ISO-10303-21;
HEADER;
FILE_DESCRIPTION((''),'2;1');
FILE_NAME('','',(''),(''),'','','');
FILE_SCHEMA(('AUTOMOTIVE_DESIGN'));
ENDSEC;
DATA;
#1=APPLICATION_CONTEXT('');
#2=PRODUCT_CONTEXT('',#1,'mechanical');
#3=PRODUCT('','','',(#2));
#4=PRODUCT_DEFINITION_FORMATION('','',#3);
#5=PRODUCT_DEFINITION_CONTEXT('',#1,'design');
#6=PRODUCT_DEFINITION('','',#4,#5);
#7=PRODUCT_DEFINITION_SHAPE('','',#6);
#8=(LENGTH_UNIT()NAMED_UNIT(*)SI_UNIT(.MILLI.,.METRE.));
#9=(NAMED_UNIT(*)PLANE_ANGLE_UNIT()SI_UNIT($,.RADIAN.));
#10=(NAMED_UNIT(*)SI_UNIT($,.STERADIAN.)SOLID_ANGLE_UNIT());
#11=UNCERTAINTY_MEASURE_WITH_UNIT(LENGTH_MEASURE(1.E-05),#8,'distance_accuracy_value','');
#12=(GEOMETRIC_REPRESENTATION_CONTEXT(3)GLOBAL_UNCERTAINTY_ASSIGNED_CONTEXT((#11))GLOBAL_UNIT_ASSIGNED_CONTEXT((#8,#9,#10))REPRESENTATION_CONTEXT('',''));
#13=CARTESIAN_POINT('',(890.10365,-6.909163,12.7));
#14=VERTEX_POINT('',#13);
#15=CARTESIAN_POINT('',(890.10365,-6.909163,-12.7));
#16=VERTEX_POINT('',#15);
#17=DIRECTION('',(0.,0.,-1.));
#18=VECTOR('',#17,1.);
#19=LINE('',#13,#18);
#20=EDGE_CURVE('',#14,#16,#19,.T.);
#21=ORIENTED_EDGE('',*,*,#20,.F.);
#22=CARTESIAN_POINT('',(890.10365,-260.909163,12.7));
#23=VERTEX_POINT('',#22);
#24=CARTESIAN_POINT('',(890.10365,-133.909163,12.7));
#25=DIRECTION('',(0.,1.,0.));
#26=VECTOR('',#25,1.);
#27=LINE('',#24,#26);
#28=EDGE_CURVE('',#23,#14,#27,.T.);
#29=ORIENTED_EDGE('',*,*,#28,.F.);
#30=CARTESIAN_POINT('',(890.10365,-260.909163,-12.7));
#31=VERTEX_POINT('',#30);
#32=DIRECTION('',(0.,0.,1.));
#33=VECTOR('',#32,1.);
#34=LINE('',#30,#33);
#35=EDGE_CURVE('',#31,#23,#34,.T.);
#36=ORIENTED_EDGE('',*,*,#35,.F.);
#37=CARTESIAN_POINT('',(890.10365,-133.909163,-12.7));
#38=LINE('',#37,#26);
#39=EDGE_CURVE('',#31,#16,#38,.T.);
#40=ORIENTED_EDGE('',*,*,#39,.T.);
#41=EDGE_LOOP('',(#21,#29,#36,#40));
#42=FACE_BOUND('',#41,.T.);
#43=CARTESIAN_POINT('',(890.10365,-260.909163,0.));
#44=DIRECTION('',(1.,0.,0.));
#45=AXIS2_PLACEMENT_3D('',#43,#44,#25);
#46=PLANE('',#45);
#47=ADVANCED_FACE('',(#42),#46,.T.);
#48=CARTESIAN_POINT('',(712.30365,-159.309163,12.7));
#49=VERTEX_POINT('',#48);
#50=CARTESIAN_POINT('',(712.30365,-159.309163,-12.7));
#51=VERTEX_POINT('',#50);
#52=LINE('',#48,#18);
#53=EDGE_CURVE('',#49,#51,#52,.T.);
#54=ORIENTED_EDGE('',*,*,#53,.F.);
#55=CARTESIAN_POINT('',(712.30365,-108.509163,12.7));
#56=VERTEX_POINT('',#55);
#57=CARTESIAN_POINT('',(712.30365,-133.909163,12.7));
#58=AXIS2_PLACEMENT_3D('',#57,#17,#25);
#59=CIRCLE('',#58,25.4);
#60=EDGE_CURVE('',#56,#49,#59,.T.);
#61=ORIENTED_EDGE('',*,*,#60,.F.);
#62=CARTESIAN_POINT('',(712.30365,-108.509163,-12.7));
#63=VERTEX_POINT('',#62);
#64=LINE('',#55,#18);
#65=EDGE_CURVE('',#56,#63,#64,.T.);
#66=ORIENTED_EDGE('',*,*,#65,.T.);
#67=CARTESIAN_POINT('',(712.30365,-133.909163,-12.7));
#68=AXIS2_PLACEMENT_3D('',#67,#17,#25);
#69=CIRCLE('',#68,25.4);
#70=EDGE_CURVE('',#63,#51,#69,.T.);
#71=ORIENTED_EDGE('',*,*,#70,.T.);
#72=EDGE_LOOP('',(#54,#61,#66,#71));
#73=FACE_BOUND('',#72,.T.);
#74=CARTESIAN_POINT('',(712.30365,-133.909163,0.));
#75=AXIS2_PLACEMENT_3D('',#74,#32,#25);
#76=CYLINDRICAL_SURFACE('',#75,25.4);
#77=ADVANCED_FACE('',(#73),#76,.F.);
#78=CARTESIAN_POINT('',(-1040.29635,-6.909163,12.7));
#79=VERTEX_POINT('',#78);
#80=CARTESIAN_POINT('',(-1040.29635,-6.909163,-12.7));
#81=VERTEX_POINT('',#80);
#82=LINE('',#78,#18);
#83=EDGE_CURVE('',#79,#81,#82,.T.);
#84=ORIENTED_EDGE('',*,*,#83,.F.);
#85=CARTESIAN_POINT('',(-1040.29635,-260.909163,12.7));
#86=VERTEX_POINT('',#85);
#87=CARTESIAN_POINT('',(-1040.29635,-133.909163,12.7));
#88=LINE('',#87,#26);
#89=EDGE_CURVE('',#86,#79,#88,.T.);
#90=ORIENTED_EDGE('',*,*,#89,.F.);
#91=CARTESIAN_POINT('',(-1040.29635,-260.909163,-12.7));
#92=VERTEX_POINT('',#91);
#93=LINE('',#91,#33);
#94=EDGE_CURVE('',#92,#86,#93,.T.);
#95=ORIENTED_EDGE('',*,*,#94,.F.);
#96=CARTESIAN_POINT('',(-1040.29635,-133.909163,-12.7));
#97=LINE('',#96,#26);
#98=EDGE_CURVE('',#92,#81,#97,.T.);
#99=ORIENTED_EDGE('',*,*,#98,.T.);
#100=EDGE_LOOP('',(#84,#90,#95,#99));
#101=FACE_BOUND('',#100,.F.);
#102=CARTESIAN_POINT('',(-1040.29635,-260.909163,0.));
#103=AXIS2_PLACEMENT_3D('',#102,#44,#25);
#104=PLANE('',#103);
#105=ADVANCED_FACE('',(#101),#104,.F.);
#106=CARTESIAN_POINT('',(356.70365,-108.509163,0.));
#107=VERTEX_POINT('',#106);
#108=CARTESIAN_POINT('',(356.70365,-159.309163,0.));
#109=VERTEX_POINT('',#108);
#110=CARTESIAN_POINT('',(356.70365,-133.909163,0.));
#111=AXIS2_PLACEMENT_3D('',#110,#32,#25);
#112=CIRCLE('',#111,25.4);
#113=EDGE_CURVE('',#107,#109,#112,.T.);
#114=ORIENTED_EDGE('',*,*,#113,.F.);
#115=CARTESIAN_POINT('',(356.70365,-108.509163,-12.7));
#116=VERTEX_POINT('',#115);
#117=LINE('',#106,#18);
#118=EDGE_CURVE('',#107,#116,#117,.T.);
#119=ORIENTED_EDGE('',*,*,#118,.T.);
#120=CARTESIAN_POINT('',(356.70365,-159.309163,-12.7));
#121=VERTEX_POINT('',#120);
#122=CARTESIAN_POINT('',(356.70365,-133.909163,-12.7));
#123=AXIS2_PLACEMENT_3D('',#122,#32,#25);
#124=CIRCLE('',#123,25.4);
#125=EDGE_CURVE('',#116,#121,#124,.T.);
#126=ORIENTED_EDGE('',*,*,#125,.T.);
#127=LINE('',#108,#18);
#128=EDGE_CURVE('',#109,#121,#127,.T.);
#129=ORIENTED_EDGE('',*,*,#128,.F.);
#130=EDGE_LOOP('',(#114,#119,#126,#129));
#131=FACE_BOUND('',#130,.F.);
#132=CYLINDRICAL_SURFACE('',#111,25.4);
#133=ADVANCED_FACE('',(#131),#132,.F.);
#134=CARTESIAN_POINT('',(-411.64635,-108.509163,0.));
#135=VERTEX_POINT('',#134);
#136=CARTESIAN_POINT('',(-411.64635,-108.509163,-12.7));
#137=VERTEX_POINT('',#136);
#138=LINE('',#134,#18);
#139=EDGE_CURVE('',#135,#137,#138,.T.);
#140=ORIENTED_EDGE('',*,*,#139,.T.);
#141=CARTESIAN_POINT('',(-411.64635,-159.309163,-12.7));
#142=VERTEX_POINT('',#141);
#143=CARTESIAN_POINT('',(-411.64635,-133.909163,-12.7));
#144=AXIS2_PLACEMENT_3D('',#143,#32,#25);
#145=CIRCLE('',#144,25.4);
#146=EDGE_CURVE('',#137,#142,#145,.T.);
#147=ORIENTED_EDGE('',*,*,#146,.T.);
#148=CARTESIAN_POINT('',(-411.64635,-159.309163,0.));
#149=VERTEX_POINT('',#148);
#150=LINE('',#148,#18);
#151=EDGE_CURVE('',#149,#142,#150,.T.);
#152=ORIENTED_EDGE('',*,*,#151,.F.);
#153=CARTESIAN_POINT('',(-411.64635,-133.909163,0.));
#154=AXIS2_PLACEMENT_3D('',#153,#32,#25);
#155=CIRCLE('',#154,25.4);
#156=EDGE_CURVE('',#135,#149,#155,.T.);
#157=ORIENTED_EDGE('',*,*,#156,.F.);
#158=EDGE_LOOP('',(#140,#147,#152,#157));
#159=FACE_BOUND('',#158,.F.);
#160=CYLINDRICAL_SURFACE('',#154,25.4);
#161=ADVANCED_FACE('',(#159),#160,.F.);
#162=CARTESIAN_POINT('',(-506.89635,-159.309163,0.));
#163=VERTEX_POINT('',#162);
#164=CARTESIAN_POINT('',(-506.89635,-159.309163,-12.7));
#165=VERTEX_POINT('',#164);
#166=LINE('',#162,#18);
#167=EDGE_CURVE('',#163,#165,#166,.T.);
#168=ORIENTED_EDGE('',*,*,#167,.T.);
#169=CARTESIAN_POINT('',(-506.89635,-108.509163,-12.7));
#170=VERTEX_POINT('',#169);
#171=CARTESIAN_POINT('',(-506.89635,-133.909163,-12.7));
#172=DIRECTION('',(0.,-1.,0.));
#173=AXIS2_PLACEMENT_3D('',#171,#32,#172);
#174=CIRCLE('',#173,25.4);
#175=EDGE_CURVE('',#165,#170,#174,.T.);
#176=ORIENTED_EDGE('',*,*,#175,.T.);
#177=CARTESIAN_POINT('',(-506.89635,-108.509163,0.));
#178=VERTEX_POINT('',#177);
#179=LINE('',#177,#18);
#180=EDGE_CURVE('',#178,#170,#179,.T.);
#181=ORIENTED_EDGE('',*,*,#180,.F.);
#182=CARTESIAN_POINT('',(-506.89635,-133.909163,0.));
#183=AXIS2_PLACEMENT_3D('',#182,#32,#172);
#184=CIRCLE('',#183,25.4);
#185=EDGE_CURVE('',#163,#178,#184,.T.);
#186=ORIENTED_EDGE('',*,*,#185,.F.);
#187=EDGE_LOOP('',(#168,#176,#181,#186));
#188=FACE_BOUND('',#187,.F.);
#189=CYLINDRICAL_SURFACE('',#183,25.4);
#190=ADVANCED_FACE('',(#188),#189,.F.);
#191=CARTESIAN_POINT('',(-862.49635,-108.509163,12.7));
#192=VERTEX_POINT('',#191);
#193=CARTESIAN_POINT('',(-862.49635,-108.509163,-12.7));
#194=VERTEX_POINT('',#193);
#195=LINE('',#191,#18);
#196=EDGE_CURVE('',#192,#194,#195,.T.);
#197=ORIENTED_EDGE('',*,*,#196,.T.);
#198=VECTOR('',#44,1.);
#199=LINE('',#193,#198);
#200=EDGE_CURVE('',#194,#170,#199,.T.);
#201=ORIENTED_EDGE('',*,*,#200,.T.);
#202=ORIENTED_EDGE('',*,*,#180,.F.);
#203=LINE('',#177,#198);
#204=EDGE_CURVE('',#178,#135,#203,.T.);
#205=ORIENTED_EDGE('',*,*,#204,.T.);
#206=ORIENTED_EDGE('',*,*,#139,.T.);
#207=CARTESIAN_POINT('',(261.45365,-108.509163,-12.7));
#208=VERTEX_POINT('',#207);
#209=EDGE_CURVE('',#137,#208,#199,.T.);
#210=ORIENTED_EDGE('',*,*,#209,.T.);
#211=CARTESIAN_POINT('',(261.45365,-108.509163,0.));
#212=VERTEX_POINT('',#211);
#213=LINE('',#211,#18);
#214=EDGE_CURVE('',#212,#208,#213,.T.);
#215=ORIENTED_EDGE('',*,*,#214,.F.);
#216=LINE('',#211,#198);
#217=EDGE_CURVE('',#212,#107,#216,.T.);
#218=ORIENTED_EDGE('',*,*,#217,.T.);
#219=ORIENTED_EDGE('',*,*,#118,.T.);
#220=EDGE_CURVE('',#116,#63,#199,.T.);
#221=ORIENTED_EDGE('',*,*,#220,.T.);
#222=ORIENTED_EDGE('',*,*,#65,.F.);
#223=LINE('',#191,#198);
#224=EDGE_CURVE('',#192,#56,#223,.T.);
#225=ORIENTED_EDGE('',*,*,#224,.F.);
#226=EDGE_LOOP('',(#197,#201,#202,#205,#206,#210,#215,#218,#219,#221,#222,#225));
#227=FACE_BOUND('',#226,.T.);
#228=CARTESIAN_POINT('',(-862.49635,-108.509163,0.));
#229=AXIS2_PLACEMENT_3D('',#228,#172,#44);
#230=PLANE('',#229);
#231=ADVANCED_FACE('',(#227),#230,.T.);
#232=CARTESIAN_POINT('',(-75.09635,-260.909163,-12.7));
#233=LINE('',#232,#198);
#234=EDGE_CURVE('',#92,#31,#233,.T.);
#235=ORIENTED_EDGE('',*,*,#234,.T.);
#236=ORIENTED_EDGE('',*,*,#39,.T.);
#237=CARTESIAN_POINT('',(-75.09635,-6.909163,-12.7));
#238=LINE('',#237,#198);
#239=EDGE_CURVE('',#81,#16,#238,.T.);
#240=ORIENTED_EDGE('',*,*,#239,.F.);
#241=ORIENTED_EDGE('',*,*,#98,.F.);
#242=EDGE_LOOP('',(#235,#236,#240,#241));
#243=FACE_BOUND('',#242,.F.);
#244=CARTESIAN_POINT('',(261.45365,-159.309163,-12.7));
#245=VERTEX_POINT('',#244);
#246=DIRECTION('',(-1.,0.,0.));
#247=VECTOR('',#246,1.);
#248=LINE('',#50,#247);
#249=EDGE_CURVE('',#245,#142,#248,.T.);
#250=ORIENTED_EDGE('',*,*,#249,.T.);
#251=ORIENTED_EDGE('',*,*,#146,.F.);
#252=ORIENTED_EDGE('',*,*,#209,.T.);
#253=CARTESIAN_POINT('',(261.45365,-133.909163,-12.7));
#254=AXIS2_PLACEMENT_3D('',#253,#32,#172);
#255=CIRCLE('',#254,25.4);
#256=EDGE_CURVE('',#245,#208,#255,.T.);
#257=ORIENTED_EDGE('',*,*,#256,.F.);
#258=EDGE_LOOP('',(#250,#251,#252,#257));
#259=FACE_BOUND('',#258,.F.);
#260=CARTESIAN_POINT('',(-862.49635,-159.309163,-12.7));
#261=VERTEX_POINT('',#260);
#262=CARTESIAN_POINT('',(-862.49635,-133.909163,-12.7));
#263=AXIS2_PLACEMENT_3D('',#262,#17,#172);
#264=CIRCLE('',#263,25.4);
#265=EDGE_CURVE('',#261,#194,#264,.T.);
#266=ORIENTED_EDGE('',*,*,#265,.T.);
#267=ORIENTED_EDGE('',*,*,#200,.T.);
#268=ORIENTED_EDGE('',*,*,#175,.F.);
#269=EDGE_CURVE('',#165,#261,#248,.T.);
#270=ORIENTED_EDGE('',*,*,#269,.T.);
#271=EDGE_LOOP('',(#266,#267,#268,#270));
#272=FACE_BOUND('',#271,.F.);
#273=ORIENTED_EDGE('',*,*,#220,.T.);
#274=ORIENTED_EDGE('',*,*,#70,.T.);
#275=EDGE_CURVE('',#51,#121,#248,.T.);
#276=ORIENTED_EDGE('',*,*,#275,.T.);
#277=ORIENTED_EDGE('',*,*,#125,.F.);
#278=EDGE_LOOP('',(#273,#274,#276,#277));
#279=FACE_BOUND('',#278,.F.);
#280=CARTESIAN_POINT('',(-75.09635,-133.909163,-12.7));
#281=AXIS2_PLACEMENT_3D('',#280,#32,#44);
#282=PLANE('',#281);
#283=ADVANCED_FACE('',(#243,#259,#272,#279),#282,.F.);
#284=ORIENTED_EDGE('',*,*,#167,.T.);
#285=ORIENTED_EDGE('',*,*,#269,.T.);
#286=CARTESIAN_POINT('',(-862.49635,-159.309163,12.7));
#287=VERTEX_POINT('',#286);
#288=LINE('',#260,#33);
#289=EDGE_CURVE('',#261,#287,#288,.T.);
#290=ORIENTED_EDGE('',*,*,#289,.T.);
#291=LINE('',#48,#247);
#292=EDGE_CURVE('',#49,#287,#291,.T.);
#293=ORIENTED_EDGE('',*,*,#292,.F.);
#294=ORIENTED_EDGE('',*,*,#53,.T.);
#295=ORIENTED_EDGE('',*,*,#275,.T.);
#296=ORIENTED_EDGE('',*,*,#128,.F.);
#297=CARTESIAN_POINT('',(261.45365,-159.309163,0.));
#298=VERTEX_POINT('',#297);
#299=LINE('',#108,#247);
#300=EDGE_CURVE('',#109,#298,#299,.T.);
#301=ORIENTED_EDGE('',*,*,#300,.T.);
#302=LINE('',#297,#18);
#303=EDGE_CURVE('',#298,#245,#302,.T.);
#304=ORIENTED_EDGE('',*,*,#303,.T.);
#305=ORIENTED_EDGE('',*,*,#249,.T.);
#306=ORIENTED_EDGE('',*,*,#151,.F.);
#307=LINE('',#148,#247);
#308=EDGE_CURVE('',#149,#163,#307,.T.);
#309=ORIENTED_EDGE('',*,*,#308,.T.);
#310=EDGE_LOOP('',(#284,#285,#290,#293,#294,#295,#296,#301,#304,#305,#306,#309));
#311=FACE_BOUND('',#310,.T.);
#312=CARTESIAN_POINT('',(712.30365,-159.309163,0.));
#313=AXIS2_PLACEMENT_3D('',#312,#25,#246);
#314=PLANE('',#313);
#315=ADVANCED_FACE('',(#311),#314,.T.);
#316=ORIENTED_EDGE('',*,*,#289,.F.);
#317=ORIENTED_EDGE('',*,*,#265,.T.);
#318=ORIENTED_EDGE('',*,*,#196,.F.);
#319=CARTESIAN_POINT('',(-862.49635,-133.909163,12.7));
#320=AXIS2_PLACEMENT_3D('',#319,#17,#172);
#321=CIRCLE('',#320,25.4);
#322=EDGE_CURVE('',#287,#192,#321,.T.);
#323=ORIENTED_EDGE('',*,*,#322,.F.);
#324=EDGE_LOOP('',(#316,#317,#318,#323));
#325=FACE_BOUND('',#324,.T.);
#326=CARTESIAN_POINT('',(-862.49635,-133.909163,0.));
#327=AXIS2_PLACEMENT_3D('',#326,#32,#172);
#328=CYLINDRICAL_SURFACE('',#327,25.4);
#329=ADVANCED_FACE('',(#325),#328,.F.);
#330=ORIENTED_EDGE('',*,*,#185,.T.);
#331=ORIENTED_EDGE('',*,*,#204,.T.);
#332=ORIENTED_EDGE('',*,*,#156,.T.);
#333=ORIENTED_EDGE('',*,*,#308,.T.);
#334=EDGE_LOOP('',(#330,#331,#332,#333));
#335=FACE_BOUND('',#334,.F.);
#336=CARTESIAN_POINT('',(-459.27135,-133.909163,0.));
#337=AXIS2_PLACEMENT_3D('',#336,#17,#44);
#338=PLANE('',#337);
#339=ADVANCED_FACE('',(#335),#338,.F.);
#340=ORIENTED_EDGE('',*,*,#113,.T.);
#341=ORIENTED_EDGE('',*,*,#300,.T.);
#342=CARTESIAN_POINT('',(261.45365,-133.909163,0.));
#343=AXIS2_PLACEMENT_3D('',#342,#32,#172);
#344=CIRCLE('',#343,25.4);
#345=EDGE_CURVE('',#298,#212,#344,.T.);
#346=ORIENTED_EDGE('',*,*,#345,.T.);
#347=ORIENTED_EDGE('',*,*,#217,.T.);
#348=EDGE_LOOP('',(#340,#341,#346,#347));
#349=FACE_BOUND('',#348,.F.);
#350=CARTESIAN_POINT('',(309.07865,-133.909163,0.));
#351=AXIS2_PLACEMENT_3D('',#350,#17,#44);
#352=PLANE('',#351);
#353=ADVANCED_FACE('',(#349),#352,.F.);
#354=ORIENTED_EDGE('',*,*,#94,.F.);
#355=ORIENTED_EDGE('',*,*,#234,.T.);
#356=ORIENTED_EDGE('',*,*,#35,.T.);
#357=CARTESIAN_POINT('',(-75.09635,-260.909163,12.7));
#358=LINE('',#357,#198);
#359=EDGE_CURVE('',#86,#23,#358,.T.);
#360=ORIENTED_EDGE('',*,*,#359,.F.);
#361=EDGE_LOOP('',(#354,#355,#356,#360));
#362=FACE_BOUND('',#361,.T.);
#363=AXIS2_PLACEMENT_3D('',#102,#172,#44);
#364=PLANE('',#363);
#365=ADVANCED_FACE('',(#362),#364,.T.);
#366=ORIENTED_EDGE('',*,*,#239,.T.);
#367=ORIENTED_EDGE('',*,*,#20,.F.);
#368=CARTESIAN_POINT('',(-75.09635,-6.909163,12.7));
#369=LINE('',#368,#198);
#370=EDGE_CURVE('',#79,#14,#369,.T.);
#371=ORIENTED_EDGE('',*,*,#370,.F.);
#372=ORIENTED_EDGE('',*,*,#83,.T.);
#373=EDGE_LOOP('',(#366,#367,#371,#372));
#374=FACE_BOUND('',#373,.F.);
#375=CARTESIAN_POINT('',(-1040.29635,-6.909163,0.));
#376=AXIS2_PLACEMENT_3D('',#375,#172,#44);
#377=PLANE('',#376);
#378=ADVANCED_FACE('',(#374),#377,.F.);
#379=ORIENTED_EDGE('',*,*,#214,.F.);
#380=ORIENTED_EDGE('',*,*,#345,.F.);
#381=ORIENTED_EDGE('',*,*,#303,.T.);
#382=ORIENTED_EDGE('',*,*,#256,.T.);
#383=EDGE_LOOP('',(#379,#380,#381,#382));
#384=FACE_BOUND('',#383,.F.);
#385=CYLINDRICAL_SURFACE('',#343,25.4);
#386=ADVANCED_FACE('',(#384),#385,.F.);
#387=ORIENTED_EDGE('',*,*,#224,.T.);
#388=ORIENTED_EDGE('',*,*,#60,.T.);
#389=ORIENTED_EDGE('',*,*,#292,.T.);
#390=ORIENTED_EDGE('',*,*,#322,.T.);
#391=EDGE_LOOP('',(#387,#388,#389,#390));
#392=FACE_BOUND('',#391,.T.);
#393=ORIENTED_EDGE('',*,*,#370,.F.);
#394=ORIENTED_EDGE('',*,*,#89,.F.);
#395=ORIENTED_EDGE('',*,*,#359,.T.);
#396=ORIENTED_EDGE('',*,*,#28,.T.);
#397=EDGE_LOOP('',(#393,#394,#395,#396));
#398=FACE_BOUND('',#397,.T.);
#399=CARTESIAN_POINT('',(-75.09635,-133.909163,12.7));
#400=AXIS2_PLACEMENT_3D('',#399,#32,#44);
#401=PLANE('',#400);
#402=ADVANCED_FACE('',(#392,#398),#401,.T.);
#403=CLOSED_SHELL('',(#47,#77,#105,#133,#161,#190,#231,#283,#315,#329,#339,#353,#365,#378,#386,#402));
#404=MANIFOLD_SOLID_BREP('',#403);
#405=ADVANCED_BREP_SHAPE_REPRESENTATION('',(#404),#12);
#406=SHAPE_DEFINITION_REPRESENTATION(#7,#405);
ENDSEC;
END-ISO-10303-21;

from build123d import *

# Parameters (mm, degrees)
F0_W     = 1930.4
F0_H     = 254
F1_DEPTH = 12.7
F3_DEPTH = 12.7


# Not quite as in the source:
# - ends of sketch curves that miss each other by under 0.0002 mm in the source are joined
# - a feature names something its author has since deleted; it is built from what else it names


with BuildPart() as f1:
    # F0 (on Top) → F1 (new body)
    with BuildSketch(Plane.XY):
        with Locations((-75.096349721, -133.9091630952)):
            Rectangle(F0_W, F0_H)
        with BuildLine():
            ThreePointArc((-862.496349721, -159.3091630952), (-887.896349721, -133.9091630952), (-862.496349721, -108.5091630952))
            Line((-862.496349721, -108.5091630952), (712.303650279, -108.5091630952))
            ThreePointArc((712.303650279, -108.5091630952), (737.703650279, -133.9091630952), (712.303650279, -159.3091630952))
            Line((712.303650279, -159.3091630952), (-862.496349721, -159.3091630952))
        make_face(mode=Mode.SUBTRACT)
    extrude(amount=F1_DEPTH)

    # F2 (on face) + F0 (on Top) → F3 (join)
    with BuildSketch(Plane(origin=(0, 0, 0), x_dir=(1, 0, 0), z_dir=(0, 0, -1))):
        with BuildLine():
            ThreePointArc((-506.896349721, 159.3091630952), (-481.496349721, 133.9091630952), (-506.896349721, 108.5091630952))
            Line((-506.896349721, 108.5091630952), (-411.646349721, 108.5091630952))
            ThreePointArc((-411.646349721, 108.5091630952), (-437.046349721, 133.9091630952), (-411.646349721, 159.3091630952))
            Line((-411.646349721, 159.3091630952), (-506.896349721, 159.3091630952))
        make_face()
        with BuildLine():
            ThreePointArc((261.453650279, 159.3091630952), (286.853650279, 133.9091630952), (261.453650279, 108.5091630952))
            Line((261.453650279, 108.5091630952), (356.703650279, 108.5091630952))
            ThreePointArc((356.703650279, 108.5091630952), (331.303650279, 133.9091630952), (356.703650279, 159.3091630952))
            Line((356.703650279, 159.3091630952), (261.453650279, 159.3091630952))
        make_face()
    with BuildSketch(Plane.XY):
        with Locations((-75.096349721, -133.9091630952)):
            Rectangle(F0_W, F0_H)
        with BuildLine():
            ThreePointArc((-862.496349721, -159.3091630952), (-887.896349721, -133.9091630952), (-862.496349721, -108.5091630952))
            Line((-862.496349721, -108.5091630952), (712.303650279, -108.5091630952))
            ThreePointArc((712.303650279, -108.5091630952), (737.703650279, -133.9091630952), (712.303650279, -159.3091630952))
            Line((712.303650279, -159.3091630952), (-862.496349721, -159.3091630952))
        make_face(mode=Mode.SUBTRACT)
    extrude(amount=F3_DEPTH, dir=(0, 0, -1))


solid = f1.part
